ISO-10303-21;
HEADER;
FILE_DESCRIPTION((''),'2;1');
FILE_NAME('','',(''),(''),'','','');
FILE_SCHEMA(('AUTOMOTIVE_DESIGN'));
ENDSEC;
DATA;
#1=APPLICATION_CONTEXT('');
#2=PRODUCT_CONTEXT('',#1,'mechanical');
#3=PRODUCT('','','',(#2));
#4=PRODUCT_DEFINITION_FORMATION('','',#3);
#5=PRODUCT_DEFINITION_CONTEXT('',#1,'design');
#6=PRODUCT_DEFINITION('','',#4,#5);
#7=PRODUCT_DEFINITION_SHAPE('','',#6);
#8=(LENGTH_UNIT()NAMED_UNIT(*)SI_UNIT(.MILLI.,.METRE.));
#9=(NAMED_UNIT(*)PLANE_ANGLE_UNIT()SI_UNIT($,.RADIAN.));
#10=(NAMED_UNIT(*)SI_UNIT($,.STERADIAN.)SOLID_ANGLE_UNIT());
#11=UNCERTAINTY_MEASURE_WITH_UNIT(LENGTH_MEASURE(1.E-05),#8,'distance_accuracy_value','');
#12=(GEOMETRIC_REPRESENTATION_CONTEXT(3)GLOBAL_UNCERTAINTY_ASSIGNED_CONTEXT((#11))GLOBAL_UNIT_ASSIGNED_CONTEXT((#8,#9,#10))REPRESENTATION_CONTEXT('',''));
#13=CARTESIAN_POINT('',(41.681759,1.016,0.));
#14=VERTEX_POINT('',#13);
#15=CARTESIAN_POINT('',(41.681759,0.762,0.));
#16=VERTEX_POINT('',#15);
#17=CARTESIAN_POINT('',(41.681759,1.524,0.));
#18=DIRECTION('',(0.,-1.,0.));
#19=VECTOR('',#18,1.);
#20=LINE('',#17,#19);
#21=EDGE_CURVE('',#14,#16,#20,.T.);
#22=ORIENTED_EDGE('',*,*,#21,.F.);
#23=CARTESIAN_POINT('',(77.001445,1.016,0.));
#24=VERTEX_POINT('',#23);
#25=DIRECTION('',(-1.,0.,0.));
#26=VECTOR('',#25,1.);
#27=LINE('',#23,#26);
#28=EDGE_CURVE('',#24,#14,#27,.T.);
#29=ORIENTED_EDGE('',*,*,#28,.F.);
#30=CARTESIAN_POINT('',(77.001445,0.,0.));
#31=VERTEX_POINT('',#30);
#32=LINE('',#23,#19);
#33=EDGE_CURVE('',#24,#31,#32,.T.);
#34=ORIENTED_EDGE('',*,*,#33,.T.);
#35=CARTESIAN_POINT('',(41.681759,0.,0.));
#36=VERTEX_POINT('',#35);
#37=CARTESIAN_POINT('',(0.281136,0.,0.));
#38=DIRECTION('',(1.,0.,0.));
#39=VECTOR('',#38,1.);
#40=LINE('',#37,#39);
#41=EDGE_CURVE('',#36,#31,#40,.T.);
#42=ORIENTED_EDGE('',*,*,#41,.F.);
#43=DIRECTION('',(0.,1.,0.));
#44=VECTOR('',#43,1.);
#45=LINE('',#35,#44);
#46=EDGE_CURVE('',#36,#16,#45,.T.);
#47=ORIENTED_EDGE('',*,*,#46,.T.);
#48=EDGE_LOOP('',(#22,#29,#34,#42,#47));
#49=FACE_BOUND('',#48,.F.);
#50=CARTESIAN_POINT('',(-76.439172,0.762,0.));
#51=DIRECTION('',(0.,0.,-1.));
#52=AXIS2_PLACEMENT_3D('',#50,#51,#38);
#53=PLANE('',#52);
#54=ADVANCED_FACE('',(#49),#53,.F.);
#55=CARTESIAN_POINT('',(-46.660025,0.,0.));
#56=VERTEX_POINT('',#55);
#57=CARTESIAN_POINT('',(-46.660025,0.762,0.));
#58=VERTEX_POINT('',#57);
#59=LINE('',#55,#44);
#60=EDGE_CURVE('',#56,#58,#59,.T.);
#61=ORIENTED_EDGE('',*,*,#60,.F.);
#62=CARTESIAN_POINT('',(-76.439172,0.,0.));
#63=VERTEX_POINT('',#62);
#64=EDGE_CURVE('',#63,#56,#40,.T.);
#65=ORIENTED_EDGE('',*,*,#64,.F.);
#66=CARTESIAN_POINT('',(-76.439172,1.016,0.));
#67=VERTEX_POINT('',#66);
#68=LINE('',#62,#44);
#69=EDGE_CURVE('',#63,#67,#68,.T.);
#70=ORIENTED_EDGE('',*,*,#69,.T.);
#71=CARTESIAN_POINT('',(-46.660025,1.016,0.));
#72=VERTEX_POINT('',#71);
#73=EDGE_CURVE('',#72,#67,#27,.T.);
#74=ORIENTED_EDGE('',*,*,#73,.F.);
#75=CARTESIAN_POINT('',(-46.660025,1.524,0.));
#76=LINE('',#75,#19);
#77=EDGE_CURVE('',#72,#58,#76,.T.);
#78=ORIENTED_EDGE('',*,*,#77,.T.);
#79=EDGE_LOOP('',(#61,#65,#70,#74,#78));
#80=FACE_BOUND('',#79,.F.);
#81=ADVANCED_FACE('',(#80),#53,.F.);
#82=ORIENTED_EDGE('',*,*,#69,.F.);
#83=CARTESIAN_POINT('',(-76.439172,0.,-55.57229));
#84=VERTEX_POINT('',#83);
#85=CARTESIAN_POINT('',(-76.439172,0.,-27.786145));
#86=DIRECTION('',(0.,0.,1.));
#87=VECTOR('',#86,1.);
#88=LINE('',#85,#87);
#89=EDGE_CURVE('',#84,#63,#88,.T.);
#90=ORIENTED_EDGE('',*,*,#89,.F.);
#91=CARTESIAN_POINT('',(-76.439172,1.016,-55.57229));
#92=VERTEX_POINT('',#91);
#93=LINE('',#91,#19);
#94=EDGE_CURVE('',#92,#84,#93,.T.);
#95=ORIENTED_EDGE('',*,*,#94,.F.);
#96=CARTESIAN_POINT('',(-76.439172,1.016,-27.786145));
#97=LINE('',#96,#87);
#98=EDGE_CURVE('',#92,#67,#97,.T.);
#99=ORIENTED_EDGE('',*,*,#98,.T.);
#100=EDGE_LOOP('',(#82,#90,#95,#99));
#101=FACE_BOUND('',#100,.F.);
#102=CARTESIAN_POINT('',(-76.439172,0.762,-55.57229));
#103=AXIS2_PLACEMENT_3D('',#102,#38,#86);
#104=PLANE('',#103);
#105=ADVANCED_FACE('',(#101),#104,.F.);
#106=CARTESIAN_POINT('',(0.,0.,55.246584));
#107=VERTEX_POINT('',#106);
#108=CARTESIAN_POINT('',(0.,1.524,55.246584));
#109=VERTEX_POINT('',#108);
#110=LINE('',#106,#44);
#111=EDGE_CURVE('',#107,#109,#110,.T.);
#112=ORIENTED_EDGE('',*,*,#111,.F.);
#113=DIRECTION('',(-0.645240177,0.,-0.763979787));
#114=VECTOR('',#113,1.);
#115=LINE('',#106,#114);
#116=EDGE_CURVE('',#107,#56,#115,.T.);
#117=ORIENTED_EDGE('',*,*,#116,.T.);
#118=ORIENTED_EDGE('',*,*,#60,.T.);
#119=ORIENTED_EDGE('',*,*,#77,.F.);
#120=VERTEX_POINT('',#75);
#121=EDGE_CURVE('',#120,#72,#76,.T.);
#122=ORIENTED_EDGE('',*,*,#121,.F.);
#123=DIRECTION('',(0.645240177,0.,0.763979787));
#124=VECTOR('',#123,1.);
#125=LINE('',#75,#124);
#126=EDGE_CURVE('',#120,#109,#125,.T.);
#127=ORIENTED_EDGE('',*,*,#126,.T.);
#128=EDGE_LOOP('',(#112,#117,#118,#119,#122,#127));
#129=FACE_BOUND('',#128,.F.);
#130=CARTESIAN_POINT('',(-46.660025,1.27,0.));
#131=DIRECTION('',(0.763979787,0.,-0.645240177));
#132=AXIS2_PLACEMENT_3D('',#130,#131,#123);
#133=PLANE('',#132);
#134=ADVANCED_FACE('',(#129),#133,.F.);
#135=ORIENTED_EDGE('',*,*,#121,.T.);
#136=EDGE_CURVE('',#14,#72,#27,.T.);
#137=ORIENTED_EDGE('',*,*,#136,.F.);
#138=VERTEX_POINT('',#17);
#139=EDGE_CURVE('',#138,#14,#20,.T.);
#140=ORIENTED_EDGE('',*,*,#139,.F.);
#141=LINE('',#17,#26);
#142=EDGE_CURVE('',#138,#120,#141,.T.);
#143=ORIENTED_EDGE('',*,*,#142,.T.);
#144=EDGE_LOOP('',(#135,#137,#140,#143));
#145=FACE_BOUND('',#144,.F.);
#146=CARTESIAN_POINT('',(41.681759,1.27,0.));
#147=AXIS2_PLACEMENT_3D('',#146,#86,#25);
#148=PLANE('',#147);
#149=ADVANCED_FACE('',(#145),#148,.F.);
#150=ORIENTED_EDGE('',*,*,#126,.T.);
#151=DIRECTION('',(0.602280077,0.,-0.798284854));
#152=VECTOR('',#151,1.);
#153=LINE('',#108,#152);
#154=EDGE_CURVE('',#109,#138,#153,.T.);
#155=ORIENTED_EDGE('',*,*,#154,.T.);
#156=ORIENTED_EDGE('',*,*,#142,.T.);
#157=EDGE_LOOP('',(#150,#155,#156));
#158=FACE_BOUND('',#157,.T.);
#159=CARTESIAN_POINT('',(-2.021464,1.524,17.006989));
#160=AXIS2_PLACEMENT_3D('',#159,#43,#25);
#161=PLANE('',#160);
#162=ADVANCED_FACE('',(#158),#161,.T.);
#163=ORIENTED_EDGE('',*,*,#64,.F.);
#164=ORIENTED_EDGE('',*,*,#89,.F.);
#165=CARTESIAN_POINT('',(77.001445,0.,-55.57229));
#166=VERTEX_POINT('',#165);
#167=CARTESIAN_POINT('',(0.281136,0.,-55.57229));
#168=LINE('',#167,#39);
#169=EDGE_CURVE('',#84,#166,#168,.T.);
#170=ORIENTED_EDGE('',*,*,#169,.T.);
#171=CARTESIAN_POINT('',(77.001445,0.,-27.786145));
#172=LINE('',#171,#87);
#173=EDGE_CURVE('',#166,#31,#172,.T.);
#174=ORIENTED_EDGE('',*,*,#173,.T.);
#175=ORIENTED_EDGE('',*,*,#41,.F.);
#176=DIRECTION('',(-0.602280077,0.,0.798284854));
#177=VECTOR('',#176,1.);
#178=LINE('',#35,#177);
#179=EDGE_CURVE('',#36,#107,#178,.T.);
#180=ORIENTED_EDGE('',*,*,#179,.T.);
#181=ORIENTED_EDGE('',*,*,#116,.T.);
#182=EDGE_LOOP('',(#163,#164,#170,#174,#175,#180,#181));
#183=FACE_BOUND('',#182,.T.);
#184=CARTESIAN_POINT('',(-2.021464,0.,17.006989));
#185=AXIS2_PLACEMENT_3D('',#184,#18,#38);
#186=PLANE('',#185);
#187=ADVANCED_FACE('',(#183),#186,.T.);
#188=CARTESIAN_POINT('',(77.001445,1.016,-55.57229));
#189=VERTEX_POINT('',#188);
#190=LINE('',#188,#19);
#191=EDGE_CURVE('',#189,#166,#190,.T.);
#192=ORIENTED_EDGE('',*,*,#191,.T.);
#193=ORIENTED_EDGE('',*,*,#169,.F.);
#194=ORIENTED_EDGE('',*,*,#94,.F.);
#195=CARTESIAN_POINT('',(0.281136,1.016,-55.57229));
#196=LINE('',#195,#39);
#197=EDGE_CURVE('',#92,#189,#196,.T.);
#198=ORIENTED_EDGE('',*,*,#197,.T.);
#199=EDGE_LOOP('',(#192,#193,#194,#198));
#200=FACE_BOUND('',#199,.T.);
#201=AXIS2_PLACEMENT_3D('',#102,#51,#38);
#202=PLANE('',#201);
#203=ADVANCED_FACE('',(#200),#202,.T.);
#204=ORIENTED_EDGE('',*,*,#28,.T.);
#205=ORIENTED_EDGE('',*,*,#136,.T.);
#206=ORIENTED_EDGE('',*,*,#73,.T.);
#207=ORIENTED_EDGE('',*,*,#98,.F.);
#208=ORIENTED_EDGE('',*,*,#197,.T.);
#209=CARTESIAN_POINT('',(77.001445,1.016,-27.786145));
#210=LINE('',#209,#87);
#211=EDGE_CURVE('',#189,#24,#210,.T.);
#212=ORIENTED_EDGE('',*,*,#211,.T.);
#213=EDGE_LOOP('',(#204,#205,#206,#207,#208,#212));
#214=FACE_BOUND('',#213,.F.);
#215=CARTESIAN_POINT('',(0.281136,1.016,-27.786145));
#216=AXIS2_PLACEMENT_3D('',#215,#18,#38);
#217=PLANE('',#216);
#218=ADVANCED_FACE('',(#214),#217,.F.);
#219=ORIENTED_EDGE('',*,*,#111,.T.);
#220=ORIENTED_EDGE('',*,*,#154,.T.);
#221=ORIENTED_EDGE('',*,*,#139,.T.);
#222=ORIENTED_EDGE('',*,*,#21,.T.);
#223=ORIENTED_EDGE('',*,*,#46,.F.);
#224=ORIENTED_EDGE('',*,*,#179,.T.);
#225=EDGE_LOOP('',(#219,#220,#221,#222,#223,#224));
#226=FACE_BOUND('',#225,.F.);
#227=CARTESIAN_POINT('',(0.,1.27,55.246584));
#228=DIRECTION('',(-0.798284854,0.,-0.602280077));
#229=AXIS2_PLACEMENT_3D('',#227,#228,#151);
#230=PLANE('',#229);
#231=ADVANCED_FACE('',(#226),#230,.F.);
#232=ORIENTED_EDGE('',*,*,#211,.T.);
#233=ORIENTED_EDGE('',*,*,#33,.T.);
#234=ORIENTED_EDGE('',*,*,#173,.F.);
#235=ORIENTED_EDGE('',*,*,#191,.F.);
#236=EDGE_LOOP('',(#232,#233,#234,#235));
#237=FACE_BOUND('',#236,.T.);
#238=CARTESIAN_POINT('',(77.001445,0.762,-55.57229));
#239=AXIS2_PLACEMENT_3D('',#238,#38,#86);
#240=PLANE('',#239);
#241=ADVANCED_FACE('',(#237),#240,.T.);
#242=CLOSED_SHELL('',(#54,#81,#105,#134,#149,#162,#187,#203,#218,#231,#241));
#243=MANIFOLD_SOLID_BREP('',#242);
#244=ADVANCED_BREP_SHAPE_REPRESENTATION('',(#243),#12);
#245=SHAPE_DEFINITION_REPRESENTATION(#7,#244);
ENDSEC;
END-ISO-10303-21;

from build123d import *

# Parameters (mm, degrees)
F34_W     = 153.4406170249
F34_H     = 55.5722899735
F35_DEPTH = 0.762
F37_DEPTH = 1.27
F39_DEPTH = 0.254
F40_DEPTH = 0.254


# Not quite as in the source:
# - the program builds the solid bodies; features that only make, move or delete a surface that nothing else refers to are left out


with BuildPart() as f35:
    # F34 (on Front) → F35 (new body)
    with BuildSketch(Plane.XZ):
        with Locations((0.281136483, -27.7861449867)):
            Rectangle(F34_W, F34_H)
    extrude(amount=-F35_DEPTH)

    # F36 (on Front) → F37 (join)
    with BuildSketch(Plane.XZ):
        Polygon((41.6817590594, 0), (0, 55.2465841174), (-46.6600246727, 0), align=None)
    extrude(amount=-F37_DEPTH)

    # F38 (on face) → F39 (join)
    with BuildSketch(Plane(origin=(0, 1.27, 0), x_dir=(-1, 0, 0), z_dir=(0, 1, 0))):
        Polygon((46.6600246727, 0), (0, 55.2465841174), (-41.6817590594, 0), align=None)
    extrude(amount=F39_DEPTH)

    # F40 (add): a face of the model
    f40_faces = [f35.faces().sort_by_distance(p)[0] for p in [
        (0.281136483, 0.762, -27.7861449867),
    ]]
    extrude(f40_faces, amount=F40_DEPTH)


solid = f35.part
